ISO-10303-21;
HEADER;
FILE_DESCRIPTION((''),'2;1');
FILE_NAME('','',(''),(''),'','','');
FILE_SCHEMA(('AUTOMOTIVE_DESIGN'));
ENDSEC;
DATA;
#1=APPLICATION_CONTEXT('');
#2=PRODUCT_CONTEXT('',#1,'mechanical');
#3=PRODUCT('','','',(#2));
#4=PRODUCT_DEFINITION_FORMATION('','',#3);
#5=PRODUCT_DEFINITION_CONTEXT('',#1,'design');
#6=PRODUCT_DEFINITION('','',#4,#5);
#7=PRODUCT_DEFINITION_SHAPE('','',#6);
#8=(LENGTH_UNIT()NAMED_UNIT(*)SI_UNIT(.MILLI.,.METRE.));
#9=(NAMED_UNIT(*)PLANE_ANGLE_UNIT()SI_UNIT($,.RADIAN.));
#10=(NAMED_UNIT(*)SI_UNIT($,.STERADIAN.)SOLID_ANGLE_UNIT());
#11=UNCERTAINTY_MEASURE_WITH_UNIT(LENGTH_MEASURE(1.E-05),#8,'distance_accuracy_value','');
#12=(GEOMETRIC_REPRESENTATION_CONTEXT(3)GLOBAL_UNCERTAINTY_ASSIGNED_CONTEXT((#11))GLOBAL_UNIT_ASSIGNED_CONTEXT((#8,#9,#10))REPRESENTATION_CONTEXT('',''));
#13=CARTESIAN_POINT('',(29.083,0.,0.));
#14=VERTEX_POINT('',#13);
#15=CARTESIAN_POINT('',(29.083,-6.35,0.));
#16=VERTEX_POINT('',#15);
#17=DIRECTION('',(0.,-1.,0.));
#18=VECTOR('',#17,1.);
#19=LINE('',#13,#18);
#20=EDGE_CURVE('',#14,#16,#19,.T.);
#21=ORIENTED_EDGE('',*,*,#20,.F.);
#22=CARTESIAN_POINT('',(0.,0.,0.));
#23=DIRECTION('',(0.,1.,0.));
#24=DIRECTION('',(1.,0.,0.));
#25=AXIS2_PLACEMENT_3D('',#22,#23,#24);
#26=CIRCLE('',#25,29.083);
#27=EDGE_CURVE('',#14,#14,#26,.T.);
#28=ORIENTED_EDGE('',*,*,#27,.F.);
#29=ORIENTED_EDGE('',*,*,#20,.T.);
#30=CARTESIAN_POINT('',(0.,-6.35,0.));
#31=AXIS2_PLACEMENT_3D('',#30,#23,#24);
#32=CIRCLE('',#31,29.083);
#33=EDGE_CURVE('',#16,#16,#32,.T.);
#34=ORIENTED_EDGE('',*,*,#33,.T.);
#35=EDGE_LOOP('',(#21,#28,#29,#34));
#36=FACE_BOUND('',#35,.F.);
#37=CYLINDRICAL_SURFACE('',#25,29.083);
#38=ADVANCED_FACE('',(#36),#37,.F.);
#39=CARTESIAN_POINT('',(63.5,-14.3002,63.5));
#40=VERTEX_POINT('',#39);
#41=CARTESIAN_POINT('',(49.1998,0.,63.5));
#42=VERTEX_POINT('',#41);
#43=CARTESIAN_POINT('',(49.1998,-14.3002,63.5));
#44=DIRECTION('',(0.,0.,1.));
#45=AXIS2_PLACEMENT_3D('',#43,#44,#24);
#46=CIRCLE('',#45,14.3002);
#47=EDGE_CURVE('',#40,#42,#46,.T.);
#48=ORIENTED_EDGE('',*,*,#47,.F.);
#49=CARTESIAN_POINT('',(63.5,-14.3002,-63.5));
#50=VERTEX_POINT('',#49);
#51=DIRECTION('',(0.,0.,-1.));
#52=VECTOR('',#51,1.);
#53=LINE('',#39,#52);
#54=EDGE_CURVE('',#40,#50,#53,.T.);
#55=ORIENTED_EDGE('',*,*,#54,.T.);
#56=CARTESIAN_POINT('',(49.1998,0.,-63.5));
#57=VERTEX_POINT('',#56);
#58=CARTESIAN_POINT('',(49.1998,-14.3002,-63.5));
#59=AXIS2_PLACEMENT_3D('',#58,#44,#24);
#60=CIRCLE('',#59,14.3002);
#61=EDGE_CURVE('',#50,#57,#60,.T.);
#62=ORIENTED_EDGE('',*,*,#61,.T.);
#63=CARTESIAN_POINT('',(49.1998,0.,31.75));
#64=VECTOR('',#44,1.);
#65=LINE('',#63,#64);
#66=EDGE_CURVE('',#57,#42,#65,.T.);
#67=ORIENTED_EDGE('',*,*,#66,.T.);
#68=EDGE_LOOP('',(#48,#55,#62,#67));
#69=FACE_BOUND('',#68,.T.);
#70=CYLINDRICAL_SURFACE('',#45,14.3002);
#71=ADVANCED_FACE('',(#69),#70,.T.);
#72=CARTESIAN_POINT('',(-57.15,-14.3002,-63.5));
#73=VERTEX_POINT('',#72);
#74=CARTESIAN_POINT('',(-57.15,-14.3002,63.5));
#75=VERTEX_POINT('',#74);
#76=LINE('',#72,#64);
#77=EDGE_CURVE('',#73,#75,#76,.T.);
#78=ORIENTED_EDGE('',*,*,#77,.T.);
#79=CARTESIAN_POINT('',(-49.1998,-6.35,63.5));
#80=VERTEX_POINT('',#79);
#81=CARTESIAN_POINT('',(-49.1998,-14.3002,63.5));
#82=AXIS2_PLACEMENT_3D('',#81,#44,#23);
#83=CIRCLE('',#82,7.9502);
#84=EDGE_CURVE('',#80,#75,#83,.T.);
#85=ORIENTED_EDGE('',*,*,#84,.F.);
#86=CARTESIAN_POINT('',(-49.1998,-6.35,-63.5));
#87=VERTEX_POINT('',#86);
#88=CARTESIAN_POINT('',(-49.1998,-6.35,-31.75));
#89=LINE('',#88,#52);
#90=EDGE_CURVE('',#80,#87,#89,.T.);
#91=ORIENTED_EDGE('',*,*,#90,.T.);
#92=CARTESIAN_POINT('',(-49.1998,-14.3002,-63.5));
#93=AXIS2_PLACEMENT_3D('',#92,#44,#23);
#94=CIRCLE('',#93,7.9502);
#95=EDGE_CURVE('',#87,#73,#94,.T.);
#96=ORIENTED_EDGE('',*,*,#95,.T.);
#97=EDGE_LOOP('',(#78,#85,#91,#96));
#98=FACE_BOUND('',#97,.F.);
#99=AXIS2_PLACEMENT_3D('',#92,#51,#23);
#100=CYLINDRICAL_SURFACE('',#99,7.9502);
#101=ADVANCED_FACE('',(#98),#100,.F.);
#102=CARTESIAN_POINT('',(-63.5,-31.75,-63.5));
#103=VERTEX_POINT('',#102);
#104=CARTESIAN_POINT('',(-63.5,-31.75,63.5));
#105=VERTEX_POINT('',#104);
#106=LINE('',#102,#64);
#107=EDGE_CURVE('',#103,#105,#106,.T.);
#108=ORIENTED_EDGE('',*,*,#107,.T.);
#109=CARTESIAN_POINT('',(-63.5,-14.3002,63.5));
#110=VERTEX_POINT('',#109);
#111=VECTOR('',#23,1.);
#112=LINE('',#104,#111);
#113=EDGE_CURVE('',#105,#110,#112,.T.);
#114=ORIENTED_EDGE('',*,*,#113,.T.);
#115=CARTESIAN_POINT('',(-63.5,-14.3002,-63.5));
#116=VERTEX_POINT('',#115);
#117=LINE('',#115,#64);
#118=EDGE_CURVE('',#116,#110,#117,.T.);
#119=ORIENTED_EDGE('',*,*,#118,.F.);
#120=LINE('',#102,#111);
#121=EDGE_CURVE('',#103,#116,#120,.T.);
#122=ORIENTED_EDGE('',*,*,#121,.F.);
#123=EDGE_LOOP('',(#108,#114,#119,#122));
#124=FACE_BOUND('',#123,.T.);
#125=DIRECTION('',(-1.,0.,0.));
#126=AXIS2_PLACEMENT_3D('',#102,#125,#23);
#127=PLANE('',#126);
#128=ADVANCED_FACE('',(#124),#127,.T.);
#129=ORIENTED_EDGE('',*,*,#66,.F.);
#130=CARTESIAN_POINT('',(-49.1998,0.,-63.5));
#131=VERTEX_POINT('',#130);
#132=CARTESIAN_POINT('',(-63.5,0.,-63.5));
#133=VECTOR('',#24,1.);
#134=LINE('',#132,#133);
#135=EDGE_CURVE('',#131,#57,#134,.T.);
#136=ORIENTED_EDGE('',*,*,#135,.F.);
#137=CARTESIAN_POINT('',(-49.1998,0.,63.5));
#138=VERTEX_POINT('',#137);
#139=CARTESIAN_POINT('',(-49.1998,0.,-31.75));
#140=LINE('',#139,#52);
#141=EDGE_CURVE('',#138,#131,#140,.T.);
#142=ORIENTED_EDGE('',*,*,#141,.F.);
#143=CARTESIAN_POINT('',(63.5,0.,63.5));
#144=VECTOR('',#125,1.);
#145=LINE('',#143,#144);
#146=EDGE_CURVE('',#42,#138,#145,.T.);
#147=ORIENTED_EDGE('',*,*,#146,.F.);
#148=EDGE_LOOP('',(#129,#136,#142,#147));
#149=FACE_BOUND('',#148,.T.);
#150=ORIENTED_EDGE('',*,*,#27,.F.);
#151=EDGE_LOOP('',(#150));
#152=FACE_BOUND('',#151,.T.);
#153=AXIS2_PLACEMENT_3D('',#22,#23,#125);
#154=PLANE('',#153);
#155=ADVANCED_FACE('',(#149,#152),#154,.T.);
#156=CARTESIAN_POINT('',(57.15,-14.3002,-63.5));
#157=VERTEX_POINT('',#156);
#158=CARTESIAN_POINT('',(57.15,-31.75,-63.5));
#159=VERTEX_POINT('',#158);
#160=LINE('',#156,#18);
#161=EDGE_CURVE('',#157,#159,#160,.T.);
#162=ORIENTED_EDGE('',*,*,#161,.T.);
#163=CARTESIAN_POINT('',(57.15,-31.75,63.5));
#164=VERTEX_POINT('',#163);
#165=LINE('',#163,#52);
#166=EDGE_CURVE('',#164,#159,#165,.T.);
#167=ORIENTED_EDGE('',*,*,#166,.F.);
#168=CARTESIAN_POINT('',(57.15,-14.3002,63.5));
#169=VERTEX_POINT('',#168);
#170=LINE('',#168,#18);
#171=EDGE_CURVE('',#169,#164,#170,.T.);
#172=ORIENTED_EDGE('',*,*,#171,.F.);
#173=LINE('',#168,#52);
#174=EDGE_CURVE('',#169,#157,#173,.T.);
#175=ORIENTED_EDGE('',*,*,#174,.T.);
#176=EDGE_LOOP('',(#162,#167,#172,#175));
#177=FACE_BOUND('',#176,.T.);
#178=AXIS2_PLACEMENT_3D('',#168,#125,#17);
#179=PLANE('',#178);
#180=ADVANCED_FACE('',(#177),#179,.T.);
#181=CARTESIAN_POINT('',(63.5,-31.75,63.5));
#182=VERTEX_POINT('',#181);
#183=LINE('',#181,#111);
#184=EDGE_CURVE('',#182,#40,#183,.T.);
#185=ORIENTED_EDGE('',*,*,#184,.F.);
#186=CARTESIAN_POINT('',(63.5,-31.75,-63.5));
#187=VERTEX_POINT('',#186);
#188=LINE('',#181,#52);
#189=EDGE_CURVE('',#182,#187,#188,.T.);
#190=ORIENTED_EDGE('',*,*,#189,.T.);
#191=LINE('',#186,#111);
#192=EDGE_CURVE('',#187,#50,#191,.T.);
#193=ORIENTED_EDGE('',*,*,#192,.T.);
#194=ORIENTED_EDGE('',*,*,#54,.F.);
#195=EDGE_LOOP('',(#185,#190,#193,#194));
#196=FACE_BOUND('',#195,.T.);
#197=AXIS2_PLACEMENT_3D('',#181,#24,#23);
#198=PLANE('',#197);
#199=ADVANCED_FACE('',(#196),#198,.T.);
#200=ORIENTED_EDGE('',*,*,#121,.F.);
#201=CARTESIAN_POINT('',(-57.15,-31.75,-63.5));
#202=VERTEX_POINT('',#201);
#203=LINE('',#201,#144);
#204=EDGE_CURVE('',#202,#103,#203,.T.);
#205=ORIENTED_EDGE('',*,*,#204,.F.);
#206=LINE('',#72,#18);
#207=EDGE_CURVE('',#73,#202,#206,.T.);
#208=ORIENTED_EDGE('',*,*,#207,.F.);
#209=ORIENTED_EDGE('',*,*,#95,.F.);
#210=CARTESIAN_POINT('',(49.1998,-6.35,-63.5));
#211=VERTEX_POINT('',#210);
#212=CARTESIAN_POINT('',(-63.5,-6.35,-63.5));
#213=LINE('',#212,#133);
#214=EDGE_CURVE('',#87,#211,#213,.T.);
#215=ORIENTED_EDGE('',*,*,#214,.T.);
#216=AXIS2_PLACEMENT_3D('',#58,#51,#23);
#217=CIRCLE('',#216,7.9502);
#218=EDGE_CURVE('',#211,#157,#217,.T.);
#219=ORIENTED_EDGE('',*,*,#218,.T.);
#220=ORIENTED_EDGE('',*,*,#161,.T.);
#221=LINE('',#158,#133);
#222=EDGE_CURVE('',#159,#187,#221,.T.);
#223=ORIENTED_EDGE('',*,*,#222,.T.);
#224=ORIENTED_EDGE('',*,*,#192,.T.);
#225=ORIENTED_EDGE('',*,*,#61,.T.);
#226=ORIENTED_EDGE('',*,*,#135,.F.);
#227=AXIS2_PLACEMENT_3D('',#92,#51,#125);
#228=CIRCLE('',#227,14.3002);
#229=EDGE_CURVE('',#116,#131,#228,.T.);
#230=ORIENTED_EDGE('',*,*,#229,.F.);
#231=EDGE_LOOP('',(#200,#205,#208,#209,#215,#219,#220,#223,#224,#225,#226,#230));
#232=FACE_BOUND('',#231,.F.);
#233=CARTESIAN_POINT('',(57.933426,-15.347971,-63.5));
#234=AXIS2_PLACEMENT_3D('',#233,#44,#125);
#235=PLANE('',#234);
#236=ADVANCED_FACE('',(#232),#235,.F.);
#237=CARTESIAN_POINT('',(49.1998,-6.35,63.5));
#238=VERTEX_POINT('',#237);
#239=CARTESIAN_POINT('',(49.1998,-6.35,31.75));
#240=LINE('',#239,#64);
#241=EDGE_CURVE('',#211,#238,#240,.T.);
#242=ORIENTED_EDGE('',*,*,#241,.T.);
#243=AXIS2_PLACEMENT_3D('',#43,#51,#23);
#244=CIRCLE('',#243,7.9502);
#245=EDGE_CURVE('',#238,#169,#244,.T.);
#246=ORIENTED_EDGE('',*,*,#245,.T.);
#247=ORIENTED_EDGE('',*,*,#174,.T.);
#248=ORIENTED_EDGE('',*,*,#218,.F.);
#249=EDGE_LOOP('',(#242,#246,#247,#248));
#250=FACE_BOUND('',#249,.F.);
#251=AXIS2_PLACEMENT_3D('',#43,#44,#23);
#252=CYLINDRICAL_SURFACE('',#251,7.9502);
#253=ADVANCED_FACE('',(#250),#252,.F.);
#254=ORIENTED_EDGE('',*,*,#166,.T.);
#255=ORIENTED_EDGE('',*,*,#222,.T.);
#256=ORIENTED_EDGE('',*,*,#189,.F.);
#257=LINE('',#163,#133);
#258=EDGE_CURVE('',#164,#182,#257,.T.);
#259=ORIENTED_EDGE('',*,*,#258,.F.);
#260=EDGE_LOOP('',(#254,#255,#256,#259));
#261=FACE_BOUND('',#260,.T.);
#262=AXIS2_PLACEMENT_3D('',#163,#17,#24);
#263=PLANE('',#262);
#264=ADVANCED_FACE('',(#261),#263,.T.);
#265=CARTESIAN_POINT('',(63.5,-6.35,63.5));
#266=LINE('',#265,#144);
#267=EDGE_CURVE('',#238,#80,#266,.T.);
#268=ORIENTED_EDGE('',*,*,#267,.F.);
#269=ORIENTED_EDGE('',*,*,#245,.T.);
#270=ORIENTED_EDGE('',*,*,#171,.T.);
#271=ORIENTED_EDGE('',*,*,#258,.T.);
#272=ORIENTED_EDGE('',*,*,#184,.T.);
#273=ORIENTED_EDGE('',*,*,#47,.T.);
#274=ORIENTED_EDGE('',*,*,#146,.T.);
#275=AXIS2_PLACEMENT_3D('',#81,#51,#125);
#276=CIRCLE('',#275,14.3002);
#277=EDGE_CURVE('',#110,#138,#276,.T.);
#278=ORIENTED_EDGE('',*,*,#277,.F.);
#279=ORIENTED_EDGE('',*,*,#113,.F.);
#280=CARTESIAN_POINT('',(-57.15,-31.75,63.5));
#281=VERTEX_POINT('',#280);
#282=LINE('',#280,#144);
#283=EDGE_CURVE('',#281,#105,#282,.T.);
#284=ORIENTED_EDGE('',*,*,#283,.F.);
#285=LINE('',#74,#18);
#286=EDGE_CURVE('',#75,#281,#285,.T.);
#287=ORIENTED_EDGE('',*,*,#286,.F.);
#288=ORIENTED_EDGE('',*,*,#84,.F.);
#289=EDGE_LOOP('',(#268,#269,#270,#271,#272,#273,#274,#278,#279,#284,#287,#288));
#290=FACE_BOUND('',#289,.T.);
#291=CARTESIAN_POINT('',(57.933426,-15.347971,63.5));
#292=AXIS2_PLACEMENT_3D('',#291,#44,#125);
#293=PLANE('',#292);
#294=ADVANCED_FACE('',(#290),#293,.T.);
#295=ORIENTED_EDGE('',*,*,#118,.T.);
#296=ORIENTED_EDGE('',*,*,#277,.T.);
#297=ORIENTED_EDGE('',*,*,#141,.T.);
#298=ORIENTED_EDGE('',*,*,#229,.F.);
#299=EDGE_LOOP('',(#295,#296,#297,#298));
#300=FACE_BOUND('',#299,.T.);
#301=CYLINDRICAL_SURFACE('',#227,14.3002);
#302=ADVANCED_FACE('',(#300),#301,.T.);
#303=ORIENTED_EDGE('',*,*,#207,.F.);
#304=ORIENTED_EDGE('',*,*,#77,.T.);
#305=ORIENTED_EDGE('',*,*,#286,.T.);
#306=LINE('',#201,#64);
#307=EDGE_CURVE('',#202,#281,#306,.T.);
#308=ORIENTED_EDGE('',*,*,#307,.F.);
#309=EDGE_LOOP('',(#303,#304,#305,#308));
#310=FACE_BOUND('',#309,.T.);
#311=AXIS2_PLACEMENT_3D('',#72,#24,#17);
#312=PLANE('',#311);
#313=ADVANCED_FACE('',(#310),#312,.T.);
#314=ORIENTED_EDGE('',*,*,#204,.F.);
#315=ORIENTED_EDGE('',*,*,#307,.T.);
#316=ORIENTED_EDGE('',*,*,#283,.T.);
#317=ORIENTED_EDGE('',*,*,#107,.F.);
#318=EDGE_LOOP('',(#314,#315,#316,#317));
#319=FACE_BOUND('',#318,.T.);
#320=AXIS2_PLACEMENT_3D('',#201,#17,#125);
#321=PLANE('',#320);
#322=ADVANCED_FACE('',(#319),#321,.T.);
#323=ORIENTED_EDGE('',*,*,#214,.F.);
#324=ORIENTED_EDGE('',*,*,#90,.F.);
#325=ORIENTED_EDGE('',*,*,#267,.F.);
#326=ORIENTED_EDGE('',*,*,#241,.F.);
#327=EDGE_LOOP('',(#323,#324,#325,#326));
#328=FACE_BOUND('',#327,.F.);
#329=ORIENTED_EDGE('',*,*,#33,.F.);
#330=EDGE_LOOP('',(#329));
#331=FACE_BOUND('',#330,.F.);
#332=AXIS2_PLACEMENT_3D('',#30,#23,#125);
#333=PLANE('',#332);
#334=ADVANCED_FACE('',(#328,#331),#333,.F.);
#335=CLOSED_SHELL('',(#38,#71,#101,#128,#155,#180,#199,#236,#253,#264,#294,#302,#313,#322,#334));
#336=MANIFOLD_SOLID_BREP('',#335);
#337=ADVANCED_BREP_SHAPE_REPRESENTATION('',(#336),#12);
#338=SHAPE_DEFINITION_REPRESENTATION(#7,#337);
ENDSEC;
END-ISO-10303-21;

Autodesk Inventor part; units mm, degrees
ref_plane "YZ Plane" through (0, 0, 0) normal (1, 0, 0) x (0, 1, 0)
ref_plane "XZ Plane" through (0, 0, 0) normal (0, 1, 0) x (-1, 0, 0)
ref_plane "XY Plane" through (0, 0, 0) normal (0, 0, 1) x (1, 0, 0)
sketch "Sketch4" plane through (0, 0, 0) normal (0, 1, 0) x (-1, 0, 0)
  line L0 (-63.5, 63.5) -> (63.5, 63.5)
  line L1 (63.5, 63.5) -> (63.5, -63.5)
  line L2 (63.5, -63.5) -> (-63.5, -63.5)
  line L3 (-63.5, -63.5) -> (-63.5, 63.5)
  line L4 (-63.5, 63.5) -> (63.5, -63.5) construction
  line L5 (63.5, 63.5) -> (-63.5, -63.5) construction
  point P0 (0, 0)
  dimension "d6" = 127
  dimension "d7" = 127
extrude "Plate1" add sketch "Sketch4" against normal blind 6.35
sketch "Sketch5" plane through (57.15, 0, -63.5) normal (1, 0, 0) x (0, -1, 0)
  line L0 (0, 127) -> (0, 0)
  line L1 (0, 0) -> (31.75, 0)
  line L2 (31.75, 0) -> (31.75, 127)
  line L3 (31.75, 127) -> (0, 127)
edge flange "Flange1" height 31.75 angle 90 thickness 6.35 bend radius 7.9502 thickness toward (1, 0, 0) relief tear relief width 6.35 relief depth 3.175 corner gap 6.35 corner form 0 edges at (63.5, 0, 0) (-63.5, 0, 0) wall of the first edge with corners at (57.15, 0, 63.5) (57.15, 0, -63.5) (57.15, -31.75, -63.5) (57.15, -31.75, 63.5)
bend "Bend1"
corner "Corner1"
sketch "Sketch6" plane through (0, 0, 0) normal (0, 1, 0) x (1, 0, 0)
  circle A0 centre (0, 0) radius 29.083
  dimension "d19" = 58.166
extrude "Cut1" cut sketch "Sketch6" against normal blind 6.35
equation "\"d20\" = Thickness"
equation "\"d8\" = Thickness"
equation "\"d9\" = BendReliefWidth"
equation "\"d10\" = BendReliefDepth"
equation "\"d11\" = MinimumRemnant"
equation "\"d12\" = TransitionRadius"
equation "\"d15\" = BendRadius"
equation "\"d16\" = CornerReliefSize"
equation "\"d17\" = GapSize"
equation "\"d18\" = JacobiRadiusSize"
equation "\"BendReliefWidth\" = Thickness"
equation "\"BendReliefDepth\" = 0.5 * Thickness"
equation "\"CornerReliefSize\" = 4 * Thickness"
equation "\"MinimumRemnant\" = 2 * Thickness"
equation "\"TransitionRadius\" = BendRadius"
equation "\"JacobiRadiusSize\" = Thickness"
equation "\"GapSize\" = Thickness"
equation "\"Thickness\" = 6.35"
equation "\"BendRadius\" = 7.9502"
properties part number "Gooseneck Model-1 Sheet-2" material "SS304"
